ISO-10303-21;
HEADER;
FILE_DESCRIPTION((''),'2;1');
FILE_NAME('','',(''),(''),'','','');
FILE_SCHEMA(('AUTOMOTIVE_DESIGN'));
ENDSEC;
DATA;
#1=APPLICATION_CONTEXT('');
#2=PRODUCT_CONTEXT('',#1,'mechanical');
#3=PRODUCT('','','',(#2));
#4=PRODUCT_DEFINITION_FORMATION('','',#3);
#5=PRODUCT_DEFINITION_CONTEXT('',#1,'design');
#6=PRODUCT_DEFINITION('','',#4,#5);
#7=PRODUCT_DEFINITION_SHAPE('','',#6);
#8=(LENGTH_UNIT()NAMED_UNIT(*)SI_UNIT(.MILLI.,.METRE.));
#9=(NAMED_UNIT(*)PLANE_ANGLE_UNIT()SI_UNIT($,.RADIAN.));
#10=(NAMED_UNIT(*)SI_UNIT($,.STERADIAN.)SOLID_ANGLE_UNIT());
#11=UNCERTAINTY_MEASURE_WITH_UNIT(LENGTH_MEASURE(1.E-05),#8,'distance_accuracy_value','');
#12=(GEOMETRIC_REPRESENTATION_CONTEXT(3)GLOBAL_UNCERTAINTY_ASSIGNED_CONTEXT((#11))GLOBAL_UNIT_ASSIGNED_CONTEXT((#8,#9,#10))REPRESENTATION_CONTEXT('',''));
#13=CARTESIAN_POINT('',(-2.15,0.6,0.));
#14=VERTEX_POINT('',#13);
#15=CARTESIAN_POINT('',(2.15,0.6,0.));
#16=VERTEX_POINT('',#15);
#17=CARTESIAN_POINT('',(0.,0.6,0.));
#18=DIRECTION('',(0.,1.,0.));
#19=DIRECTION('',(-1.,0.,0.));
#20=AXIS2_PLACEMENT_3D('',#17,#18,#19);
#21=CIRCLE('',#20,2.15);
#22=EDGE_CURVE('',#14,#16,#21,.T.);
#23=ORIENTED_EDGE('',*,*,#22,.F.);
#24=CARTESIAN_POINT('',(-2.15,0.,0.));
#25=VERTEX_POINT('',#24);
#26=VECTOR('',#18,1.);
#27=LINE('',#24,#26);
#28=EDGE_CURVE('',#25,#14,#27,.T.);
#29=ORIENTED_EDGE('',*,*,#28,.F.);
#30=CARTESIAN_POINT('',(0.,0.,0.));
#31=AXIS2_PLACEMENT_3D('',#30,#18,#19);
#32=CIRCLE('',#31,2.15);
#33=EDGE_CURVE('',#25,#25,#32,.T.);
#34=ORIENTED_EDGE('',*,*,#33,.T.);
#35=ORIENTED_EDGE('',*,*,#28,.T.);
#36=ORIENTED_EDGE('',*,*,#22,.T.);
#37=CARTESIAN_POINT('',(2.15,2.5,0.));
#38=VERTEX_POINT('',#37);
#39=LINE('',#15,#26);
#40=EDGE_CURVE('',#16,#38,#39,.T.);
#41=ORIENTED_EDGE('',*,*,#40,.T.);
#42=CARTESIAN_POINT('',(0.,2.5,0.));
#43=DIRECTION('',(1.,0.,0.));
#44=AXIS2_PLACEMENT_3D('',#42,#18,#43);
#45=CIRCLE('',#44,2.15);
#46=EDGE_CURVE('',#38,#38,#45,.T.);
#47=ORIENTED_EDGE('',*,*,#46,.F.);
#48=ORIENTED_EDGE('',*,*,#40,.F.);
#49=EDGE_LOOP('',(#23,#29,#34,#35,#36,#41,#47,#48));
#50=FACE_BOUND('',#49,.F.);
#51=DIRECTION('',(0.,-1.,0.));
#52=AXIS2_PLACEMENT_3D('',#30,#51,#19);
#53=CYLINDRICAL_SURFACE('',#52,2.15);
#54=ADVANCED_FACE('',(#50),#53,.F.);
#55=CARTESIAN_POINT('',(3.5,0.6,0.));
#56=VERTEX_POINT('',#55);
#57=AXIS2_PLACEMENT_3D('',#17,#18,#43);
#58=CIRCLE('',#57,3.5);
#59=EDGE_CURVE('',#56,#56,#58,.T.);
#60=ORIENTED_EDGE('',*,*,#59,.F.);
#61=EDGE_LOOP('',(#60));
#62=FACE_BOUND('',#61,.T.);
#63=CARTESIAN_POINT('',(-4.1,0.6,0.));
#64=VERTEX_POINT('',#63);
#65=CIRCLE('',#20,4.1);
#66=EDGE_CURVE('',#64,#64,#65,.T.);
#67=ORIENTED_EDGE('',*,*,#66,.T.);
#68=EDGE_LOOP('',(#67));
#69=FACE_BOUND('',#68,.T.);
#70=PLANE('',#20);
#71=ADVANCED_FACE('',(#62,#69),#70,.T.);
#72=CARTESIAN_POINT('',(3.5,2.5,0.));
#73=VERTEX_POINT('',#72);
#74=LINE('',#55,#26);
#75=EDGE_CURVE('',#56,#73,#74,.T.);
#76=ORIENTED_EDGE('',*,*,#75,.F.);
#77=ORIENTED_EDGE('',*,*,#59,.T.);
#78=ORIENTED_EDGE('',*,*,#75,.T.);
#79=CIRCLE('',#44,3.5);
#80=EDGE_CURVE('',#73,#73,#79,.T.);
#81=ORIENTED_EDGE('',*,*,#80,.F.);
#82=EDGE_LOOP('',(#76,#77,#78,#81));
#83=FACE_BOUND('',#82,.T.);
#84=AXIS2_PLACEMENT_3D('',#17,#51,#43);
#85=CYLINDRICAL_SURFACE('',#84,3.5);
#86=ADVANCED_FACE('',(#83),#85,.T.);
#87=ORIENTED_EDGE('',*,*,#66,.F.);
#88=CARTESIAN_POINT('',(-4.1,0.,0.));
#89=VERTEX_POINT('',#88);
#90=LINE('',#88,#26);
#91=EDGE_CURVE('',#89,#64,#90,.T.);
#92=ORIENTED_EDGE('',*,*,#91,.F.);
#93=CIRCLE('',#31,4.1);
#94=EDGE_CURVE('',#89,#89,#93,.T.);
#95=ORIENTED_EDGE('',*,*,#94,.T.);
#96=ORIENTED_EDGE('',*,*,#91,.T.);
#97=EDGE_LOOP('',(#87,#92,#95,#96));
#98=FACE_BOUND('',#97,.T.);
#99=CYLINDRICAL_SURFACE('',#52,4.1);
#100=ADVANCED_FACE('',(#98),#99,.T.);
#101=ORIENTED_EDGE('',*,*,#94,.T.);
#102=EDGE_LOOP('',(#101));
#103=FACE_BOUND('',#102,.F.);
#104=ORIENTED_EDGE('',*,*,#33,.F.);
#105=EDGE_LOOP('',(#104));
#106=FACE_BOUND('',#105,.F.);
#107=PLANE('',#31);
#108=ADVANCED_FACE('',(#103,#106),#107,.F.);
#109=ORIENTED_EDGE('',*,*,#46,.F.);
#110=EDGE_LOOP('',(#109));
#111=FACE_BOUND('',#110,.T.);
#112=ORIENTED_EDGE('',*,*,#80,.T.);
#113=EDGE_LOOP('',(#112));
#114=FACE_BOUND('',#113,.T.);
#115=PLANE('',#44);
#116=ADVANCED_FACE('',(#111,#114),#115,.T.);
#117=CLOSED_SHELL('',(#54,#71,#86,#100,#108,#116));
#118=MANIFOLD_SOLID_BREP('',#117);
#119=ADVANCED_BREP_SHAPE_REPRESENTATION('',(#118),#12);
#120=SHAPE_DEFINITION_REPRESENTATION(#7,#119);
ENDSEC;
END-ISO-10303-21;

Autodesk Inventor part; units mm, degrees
ref_plane "YZ Plane" through (0, 0, 0) normal (1, 0, 0) x (0, 1, 0)
ref_plane "XZ Plane" through (0, 0, 0) normal (0, 1, 0) x (-1, 0, 0)
ref_plane "XY Plane" through (0, 0, 0) normal (0, 0, 1) x (1, 0, 0)
sketch "Sketch1" plane through (0, 0, 0) normal (0, 1, 0) x (-1, 0, 0)
  circle A0 centre (0, 0) radius 4.1
  circle A1 centre (0, 0) radius 2.15
  dimension "d0" = 8.2
  dimension "d1" = 4.3
extrude "Extrusion1" add sketch "Sketch1" along normal blind 0.6
sketch "Sketch2" plane through (0, 0.6, 0) normal (0, 1, 0) x (1, 0, 0)
  circle A0 centre (0, 0) radius 3.5
  circle A1 centre (0, 0) radius 2.15 projected
  dimension "d4" = 7
extrude "Extrusion2" add sketch "Sketch2" along normal blind 1.9
properties part number "FakeAssBearing"
